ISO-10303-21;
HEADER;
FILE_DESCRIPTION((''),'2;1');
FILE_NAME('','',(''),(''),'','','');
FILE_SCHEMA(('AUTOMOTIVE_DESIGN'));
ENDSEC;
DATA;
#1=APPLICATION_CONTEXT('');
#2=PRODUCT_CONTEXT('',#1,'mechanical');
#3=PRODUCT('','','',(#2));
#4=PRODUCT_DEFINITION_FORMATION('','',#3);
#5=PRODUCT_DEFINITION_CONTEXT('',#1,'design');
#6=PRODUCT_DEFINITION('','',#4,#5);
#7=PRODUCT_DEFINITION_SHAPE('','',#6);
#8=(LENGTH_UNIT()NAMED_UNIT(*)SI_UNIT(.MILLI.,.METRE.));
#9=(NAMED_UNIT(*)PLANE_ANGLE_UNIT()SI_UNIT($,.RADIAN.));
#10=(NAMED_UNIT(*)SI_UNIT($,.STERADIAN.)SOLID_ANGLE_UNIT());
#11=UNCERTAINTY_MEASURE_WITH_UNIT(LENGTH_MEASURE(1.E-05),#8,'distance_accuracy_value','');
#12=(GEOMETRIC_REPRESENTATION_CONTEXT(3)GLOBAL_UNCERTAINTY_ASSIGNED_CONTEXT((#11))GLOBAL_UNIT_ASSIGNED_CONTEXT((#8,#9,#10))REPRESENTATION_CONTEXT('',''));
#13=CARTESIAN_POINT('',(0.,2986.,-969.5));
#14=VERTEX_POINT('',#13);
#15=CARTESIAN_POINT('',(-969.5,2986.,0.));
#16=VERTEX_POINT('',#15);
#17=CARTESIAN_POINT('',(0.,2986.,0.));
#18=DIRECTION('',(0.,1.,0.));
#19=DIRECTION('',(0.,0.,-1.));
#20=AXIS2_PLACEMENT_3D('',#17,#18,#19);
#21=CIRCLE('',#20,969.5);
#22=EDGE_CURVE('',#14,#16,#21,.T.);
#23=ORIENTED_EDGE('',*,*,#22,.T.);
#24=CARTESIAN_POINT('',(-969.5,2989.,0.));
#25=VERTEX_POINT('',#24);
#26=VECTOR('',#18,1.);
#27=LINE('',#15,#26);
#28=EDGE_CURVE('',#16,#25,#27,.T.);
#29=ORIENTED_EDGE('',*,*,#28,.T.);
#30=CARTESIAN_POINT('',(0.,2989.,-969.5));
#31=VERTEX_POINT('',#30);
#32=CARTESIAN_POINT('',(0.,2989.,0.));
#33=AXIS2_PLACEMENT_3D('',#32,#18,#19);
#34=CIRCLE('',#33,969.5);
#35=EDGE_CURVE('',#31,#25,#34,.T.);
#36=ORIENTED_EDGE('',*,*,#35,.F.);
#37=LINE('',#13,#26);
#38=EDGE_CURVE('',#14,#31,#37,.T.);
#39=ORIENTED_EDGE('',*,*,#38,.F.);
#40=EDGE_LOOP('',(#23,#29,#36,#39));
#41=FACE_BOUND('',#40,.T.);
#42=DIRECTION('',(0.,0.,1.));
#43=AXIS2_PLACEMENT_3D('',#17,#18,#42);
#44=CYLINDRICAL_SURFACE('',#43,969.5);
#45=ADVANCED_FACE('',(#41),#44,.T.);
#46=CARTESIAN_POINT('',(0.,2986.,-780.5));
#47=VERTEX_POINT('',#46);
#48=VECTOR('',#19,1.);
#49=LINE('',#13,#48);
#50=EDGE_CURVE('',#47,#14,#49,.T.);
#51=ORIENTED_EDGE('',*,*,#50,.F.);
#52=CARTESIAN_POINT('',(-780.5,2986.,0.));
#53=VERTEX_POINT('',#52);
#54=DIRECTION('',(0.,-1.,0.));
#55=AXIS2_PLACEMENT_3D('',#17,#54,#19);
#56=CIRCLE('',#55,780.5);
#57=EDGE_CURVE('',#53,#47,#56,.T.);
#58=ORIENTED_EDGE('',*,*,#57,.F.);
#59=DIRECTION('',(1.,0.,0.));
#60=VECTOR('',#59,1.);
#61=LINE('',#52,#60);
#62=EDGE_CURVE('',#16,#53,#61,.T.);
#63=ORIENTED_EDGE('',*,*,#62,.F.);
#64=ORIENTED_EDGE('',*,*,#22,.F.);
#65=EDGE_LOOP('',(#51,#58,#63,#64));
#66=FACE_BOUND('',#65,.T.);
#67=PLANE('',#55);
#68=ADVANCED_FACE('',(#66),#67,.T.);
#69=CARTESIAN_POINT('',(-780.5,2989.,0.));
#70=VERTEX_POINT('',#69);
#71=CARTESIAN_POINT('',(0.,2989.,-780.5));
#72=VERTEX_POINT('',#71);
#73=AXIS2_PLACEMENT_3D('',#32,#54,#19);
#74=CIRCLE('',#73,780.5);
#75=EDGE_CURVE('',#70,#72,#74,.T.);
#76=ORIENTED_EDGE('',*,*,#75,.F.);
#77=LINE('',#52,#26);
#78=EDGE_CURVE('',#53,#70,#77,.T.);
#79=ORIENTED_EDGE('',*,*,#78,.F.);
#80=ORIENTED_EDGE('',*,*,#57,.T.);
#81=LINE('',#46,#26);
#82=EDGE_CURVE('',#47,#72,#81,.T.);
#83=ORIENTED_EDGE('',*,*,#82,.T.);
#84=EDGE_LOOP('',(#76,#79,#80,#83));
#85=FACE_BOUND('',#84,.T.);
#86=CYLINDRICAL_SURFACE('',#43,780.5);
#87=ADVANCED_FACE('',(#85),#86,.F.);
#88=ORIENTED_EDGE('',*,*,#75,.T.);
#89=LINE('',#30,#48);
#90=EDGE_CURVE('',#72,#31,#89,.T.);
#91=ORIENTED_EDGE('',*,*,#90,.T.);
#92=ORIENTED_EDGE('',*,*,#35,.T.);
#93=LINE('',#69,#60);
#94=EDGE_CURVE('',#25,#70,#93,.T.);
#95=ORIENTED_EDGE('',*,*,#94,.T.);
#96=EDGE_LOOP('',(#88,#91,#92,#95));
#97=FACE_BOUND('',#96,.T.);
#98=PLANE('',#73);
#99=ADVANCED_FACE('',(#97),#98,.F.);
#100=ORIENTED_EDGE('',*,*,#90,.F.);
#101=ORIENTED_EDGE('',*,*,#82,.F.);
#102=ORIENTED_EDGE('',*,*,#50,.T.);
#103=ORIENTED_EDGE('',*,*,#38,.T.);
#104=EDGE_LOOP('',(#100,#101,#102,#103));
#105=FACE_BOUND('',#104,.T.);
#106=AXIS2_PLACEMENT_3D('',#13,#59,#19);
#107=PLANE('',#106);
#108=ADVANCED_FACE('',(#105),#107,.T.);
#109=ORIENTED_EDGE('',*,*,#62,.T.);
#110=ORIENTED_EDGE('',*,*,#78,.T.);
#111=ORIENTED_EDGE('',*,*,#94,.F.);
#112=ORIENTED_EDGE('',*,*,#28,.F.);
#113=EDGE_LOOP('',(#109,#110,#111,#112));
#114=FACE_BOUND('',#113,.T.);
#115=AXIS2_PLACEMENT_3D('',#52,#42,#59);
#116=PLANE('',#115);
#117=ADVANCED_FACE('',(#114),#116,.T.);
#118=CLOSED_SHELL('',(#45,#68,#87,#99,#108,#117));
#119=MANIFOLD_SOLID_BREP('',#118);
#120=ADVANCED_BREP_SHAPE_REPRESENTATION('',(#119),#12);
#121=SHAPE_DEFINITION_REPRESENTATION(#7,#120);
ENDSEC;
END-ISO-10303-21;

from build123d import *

# Parameters (mm, degrees)
SM_BASE_FLANGE_1_DEPTH = 3


# Sheet-metal steps are written as plain solids
with BuildPart() as part:
    # Sketch 1 → 基体-法兰1 (new body)
    with BuildSketch(Plane(origin=(0, 2989, 0), x_dir=(1, 0, 0), z_dir=(0, 1, 0))):
        with BuildLine():
            Line((-780.5, 0), (-969.5, 0))
            ThreePointArc((-969.5, 0), (-685.54002436, 685.54002436), (0, 969.5))
            Line((0, 969.5), (0, 780.5))
            ThreePointArc((0, 780.5), (-551.896842716, 551.896842716), (-780.5, 0))
        make_face()
    extrude(amount=-SM_BASE_FLANGE_1_DEPTH)


solid = part.part
